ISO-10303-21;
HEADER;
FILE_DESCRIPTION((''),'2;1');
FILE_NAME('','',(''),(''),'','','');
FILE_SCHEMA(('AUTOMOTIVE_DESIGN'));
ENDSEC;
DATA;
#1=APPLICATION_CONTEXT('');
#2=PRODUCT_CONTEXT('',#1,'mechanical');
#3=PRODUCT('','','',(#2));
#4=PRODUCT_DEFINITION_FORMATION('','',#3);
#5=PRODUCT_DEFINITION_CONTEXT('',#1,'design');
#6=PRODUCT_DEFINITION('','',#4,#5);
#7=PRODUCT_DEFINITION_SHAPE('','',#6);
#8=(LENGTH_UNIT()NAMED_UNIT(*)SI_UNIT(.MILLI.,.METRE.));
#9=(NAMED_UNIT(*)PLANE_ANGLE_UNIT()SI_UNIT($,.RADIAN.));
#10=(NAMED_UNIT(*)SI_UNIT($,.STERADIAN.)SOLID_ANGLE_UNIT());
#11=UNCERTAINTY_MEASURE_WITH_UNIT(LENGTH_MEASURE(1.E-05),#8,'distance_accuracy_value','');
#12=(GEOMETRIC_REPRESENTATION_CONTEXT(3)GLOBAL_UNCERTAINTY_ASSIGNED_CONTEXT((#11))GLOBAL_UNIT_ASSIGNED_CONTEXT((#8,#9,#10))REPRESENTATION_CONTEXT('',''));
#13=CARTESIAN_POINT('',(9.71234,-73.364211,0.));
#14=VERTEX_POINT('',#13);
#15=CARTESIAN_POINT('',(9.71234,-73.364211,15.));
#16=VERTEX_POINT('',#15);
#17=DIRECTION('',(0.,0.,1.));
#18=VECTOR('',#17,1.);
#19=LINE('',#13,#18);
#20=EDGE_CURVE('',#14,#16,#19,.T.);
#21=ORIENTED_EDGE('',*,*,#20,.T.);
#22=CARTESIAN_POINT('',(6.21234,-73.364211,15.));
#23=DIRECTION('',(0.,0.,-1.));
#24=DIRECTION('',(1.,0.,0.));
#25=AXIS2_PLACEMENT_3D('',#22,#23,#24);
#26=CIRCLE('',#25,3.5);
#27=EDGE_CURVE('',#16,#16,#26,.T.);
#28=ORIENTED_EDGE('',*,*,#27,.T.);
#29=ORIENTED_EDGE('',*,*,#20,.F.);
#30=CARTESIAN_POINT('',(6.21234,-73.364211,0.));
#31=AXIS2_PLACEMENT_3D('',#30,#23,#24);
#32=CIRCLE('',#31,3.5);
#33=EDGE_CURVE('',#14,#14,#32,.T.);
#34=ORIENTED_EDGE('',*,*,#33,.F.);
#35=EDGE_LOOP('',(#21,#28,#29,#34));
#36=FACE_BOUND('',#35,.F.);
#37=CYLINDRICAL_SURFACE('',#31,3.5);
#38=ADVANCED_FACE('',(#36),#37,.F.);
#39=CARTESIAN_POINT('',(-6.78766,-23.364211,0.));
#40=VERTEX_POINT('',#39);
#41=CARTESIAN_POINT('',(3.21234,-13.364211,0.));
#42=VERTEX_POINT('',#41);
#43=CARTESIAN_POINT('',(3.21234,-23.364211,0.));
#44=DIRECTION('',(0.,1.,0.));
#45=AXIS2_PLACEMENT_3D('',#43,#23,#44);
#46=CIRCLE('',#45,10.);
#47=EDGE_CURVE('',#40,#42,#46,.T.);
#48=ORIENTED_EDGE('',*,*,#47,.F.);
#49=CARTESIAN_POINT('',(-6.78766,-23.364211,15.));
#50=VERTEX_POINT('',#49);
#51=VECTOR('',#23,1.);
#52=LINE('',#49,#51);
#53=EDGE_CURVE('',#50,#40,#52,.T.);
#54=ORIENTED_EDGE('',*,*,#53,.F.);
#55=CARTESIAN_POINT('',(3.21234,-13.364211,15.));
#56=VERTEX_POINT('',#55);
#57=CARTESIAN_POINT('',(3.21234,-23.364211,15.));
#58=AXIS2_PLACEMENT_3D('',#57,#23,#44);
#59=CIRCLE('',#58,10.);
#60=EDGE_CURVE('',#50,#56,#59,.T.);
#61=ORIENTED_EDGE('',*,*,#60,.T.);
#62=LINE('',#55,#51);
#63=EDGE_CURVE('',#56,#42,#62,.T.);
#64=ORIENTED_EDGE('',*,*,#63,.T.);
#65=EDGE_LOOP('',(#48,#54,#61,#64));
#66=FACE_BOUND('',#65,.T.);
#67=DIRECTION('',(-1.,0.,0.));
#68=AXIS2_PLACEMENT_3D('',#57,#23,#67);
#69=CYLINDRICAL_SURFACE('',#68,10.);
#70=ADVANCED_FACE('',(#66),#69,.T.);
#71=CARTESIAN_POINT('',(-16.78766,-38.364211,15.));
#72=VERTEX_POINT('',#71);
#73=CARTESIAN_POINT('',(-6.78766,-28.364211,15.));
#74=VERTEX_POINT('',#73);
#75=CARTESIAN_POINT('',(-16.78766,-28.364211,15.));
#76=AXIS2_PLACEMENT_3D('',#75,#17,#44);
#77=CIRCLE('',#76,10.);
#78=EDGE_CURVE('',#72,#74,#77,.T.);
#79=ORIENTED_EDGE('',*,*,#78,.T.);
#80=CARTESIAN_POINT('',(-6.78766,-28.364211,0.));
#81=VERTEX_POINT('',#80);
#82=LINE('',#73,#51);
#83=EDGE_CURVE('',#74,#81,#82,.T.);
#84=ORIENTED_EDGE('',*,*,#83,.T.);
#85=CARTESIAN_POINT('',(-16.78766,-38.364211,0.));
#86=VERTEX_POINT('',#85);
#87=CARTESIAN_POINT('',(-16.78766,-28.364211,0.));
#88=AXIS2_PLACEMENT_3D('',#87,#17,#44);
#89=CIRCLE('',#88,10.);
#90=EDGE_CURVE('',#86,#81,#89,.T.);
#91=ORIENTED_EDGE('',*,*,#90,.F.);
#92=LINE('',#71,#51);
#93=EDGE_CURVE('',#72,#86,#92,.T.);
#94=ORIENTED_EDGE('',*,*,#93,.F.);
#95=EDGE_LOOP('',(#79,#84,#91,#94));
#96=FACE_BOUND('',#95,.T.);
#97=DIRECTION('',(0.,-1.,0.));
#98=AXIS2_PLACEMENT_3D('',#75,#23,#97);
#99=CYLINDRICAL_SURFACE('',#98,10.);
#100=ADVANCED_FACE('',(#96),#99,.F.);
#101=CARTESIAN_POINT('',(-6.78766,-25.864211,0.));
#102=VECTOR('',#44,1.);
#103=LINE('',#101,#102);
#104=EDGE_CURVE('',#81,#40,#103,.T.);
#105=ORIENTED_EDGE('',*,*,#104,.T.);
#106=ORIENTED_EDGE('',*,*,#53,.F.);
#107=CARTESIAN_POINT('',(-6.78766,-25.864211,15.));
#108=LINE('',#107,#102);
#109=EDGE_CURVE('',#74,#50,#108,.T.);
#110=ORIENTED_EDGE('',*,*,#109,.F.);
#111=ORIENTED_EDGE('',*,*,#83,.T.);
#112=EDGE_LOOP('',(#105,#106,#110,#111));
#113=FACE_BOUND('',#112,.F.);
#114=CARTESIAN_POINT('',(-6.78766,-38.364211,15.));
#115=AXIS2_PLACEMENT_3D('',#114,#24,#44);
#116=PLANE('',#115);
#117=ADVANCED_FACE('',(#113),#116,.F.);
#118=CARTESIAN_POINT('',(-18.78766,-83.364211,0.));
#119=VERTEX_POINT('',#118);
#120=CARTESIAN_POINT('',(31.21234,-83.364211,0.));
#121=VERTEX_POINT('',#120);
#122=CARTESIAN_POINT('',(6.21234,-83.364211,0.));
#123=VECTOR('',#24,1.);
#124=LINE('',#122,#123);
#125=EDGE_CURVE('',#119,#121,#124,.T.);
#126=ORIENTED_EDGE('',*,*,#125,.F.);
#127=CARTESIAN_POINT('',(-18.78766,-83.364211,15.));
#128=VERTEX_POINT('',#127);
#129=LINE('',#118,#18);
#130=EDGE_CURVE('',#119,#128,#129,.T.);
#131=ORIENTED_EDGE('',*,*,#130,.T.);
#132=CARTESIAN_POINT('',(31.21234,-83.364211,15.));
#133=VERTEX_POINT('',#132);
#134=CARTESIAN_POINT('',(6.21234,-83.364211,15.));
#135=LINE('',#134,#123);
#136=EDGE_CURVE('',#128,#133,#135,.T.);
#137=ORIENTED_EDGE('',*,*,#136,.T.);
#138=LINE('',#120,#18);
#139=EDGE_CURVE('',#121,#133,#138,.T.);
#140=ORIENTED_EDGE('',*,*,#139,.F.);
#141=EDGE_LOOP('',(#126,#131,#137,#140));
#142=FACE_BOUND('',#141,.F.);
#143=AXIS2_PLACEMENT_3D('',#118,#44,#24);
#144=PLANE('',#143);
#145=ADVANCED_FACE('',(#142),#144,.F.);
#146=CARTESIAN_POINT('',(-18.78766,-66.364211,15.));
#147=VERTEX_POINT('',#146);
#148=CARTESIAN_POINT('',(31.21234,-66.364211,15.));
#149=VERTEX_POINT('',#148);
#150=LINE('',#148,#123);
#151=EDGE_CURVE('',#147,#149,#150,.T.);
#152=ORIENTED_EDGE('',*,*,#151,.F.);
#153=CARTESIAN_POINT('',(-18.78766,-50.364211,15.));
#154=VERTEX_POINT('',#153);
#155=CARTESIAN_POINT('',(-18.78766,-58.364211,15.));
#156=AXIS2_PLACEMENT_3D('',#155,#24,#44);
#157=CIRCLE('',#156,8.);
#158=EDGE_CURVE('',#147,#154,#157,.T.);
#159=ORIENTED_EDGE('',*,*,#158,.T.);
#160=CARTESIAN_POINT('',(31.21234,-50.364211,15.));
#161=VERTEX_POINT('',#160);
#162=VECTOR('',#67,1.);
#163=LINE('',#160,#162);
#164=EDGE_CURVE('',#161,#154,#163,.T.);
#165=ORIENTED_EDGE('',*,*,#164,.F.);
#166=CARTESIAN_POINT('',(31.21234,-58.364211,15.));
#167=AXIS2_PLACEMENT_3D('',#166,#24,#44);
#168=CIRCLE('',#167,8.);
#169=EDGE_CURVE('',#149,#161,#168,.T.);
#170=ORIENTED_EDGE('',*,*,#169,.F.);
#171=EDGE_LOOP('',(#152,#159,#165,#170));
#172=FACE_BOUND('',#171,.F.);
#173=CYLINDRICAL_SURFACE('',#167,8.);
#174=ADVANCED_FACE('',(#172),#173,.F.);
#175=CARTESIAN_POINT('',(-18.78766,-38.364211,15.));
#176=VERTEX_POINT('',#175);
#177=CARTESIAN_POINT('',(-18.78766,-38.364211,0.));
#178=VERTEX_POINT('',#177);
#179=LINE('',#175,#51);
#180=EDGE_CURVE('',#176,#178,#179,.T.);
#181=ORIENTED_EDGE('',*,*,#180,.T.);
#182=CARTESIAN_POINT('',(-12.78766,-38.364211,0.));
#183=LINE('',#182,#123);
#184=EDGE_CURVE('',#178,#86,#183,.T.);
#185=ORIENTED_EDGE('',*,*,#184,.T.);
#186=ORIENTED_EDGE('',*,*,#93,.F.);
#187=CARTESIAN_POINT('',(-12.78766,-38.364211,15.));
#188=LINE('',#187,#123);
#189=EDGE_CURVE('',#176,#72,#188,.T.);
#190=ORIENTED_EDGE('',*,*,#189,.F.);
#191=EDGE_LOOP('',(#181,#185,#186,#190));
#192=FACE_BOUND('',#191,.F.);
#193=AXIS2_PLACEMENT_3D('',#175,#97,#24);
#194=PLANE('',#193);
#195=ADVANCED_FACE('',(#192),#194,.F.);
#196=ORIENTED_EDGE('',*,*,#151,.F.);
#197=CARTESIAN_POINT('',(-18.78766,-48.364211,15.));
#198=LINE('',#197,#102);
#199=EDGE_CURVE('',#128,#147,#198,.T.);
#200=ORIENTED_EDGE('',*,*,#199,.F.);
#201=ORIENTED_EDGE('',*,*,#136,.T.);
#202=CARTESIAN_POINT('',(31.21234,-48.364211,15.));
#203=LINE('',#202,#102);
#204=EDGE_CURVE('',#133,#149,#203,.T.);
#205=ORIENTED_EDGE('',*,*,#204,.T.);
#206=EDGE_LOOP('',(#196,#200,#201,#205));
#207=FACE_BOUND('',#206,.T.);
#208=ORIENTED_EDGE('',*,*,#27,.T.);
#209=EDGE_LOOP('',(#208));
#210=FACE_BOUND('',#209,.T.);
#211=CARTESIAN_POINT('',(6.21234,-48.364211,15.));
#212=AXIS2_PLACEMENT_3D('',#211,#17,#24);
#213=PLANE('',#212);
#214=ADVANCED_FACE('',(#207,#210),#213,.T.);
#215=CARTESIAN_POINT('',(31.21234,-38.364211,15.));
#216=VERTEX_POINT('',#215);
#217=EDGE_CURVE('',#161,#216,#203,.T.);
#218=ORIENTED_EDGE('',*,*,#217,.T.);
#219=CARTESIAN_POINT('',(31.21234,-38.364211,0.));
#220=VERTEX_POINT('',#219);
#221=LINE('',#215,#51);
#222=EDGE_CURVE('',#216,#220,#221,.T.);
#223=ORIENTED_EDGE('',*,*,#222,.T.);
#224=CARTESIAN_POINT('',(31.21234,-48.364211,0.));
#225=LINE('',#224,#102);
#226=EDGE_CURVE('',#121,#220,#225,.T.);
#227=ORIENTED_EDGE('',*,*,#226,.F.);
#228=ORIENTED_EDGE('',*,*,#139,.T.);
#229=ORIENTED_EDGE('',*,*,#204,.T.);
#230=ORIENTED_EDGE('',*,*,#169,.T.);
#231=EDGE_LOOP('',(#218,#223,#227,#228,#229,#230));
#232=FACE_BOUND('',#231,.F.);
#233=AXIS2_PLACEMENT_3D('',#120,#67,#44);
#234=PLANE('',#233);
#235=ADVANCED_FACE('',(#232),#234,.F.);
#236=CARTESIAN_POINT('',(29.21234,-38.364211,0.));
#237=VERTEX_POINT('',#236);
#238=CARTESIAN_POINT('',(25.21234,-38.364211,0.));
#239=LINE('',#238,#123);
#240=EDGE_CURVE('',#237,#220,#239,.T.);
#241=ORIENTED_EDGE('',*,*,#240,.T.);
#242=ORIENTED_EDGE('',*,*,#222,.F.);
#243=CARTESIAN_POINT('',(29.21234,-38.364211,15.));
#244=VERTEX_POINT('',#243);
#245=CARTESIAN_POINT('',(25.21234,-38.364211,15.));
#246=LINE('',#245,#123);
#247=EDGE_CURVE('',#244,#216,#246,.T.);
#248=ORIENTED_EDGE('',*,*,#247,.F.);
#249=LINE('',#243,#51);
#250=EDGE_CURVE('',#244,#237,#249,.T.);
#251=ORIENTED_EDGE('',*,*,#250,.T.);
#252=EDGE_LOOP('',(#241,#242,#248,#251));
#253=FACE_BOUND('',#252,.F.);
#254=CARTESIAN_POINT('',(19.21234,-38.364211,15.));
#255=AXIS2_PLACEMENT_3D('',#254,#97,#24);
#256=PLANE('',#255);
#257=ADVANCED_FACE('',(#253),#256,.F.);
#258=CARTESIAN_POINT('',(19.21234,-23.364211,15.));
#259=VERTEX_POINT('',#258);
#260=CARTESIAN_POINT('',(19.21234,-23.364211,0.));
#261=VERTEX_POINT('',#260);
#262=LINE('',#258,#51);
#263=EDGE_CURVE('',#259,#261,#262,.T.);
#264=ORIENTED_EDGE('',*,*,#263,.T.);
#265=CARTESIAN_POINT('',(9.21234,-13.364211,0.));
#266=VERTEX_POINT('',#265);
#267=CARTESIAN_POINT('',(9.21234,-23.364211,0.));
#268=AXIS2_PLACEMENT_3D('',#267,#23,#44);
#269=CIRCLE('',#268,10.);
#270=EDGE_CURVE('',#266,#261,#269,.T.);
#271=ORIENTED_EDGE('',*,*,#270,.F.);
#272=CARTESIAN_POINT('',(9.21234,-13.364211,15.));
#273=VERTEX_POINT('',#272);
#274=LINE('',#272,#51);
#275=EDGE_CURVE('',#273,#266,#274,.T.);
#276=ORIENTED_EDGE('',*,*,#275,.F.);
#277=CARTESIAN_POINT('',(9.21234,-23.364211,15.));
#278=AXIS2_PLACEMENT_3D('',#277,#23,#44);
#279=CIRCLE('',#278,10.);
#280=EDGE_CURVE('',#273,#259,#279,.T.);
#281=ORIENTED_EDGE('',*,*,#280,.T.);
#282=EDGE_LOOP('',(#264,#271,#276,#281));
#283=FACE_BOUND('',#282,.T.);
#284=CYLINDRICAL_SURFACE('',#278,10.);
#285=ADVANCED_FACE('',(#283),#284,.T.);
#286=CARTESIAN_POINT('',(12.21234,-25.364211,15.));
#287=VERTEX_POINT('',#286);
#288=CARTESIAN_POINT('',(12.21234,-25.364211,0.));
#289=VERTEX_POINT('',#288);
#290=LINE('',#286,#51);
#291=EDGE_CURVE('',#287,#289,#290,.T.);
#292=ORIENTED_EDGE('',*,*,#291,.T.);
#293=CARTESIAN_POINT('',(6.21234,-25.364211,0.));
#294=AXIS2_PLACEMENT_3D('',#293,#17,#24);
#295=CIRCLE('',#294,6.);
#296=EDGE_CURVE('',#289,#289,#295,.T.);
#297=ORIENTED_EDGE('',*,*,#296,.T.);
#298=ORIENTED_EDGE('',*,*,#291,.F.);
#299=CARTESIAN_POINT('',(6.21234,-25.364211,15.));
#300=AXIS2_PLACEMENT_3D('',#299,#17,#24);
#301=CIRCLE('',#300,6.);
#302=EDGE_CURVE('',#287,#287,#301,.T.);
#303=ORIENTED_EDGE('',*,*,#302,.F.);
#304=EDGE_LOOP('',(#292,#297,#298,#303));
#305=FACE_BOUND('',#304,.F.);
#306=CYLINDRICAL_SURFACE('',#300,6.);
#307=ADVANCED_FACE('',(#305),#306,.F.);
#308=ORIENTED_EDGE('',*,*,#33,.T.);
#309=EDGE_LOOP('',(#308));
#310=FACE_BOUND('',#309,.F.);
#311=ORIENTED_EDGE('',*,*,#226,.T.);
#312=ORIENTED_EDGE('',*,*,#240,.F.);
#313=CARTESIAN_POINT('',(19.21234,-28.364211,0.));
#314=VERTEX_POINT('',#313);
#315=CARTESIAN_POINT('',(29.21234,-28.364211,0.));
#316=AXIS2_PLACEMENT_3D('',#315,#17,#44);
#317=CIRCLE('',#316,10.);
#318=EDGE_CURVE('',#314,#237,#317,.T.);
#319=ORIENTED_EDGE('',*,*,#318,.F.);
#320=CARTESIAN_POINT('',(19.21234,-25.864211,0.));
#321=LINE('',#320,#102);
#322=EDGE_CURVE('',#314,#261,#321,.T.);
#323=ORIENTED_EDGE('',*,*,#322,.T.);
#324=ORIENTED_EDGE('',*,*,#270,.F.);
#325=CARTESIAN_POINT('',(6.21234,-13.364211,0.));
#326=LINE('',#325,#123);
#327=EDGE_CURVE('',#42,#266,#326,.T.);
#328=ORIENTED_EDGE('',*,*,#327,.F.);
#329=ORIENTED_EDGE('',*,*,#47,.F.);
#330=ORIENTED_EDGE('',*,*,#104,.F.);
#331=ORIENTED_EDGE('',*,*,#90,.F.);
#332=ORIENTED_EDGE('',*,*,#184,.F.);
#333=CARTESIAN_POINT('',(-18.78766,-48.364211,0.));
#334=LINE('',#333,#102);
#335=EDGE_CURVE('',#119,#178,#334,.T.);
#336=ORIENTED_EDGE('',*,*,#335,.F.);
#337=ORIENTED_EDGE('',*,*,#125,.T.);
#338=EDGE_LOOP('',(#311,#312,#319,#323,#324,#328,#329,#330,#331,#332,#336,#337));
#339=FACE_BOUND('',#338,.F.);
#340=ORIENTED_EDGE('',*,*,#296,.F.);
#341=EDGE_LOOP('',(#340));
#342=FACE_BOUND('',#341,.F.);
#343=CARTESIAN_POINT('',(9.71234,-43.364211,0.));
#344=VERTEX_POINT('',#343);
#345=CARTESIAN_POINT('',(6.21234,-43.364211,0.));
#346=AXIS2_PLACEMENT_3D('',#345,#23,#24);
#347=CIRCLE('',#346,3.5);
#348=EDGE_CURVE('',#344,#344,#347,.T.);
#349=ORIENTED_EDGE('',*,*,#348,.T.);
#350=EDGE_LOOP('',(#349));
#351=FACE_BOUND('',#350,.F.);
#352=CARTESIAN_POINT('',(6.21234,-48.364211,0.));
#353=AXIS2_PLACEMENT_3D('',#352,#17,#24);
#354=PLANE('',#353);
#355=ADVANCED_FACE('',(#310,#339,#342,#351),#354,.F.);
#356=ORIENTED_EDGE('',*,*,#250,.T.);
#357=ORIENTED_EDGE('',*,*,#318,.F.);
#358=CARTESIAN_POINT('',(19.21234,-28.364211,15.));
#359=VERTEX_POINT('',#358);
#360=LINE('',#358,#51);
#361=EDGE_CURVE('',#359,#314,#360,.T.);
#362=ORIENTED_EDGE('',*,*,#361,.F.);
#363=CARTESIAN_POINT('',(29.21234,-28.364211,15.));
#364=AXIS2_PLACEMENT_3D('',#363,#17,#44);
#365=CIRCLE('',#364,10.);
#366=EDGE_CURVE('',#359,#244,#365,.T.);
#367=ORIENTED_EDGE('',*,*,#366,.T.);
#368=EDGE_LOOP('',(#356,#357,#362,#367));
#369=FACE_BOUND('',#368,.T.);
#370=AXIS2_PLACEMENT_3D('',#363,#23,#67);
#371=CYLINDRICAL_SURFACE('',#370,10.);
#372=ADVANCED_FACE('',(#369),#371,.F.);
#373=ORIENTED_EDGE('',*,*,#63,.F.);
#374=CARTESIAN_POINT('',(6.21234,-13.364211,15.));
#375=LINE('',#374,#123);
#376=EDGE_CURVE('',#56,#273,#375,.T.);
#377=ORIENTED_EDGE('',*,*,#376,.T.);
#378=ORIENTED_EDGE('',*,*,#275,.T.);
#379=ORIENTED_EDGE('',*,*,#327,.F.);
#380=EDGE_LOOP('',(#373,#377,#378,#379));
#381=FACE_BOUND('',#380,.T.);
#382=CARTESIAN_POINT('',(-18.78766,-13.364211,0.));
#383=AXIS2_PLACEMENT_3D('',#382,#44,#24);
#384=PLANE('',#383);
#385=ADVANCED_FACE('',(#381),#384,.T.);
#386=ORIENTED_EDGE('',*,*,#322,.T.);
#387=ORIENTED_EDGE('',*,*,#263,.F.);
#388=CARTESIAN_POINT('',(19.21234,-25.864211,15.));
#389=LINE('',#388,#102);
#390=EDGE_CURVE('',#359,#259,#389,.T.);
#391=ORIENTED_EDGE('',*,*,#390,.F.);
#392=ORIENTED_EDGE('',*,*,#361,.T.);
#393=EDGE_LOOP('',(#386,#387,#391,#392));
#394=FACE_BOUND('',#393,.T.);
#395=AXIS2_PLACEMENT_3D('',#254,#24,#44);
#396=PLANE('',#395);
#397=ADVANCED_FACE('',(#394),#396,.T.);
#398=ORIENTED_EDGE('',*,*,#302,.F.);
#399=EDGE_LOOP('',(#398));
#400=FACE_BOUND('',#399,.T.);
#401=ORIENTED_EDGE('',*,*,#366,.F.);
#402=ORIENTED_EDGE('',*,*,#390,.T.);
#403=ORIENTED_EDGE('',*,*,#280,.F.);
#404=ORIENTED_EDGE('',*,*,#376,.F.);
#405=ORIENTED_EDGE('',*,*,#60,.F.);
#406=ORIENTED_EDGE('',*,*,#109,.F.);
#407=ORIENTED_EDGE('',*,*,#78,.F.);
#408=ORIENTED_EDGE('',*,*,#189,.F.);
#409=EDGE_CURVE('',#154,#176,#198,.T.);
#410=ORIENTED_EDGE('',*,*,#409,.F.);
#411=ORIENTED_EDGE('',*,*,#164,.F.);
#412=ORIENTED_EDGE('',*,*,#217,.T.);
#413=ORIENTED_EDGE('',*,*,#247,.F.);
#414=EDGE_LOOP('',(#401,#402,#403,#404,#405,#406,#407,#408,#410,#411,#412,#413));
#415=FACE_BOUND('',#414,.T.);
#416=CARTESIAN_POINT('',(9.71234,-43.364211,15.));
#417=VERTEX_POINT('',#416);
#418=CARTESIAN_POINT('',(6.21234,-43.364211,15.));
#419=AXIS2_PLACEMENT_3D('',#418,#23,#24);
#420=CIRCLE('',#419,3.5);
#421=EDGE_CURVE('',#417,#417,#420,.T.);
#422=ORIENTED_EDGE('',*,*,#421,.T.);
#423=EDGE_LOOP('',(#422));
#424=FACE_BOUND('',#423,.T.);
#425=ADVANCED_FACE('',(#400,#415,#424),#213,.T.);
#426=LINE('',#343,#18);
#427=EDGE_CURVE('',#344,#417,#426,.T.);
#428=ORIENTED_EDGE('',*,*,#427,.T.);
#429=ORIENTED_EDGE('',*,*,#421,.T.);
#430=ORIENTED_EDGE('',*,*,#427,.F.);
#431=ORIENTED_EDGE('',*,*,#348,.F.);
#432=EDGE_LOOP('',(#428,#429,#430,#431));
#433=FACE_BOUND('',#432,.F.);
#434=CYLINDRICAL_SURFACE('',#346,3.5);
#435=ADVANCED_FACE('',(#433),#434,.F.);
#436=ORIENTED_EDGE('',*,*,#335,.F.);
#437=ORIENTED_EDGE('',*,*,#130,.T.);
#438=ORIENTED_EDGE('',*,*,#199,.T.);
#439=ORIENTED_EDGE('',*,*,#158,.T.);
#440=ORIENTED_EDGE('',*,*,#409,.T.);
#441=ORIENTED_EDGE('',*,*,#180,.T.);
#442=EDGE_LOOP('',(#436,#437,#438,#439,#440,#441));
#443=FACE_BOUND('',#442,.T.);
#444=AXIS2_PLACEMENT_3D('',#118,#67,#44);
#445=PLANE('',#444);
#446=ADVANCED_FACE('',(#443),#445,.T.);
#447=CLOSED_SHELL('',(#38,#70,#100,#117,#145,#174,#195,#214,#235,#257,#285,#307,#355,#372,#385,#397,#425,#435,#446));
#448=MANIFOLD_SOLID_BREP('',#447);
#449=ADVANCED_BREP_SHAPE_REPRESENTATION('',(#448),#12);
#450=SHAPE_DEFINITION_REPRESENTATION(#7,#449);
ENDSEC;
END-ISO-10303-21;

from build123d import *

# Parameters (mm, degrees)
F0_W     = 50
F0_H     = 70
F1_DEPTH = 15
F2_R     = 6
F3_DEPTH = 25
F4_R     = 8
F5_DEPTH = 50.001
F6_R     = 3.5
F7_DEPTH = 15.001
F8_W     = 12
F8_H     = 25
F9_DEPTH = 15
F10_R    = 10


# Not quite as in the source:
# - a feature names something its author has since deleted; it is built from what else it names


with BuildPart() as f1:
    # F0 (on Top) → F1 (new body)
    with BuildSketch(Plane.XY):
        with Locations((6.2123397365, -48.3642113331)):
            Rectangle(F0_W, F0_H)
    extrude(amount=F1_DEPTH)

    # F2 (on face) → F3 (cut)
    with BuildSketch(Plane.XY.offset(15)):
        with Locations((6.2123397365, -25.3642113331)):
            Circle(F2_R)
    extrude(amount=-F3_DEPTH, mode=Mode.SUBTRACT)

    # F4 (on face) → F5 (cut, through all)
    with BuildSketch(Plane.YZ.offset(31.2123397365)):
        with Locations((-58.3642113331, 15)):
            Circle(F4_R)
    extrude(amount=-F5_DEPTH, mode=Mode.SUBTRACT)

    # F6 (on face) → F7 (cut, through all)
    with BuildSketch(Plane(origin=(0, 0, 0), x_dir=(1, 0, 0), z_dir=(0, 0, -1))):
        with Locations((6.2123397365, 43.3642113331)):
            Circle(F6_R)
        with Locations((6.2123397365, 73.3642113331)):
            Circle(F6_R)
    extrude(amount=-F7_DEPTH, mode=Mode.SUBTRACT)

    # F8 (on face) → F9 (cut, through all)
    with BuildSketch(Plane.XY.offset(15)):
        with Locations((25.2123397365, -25.8642113331)):
            Rectangle(F8_W, F8_H)
        with Locations((-12.7876602635, -25.8642113331)):
            Rectangle(F8_W, F8_H)
    extrude(amount=-F9_DEPTH, mode=Mode.SUBTRACT)

    # F10
    f10_edges = [f1.edges().sort_by_distance(p)[0] for p in [
        (19.21234, -13.364211, 7.5),
        (-6.78766, -13.364211, 7.5),
        (-6.78766, -38.364211, 7.5),
        (19.21234, -38.364211, 7.5),
    ]]
    fillet(f10_edges, radius=F10_R)


solid = f1.part
